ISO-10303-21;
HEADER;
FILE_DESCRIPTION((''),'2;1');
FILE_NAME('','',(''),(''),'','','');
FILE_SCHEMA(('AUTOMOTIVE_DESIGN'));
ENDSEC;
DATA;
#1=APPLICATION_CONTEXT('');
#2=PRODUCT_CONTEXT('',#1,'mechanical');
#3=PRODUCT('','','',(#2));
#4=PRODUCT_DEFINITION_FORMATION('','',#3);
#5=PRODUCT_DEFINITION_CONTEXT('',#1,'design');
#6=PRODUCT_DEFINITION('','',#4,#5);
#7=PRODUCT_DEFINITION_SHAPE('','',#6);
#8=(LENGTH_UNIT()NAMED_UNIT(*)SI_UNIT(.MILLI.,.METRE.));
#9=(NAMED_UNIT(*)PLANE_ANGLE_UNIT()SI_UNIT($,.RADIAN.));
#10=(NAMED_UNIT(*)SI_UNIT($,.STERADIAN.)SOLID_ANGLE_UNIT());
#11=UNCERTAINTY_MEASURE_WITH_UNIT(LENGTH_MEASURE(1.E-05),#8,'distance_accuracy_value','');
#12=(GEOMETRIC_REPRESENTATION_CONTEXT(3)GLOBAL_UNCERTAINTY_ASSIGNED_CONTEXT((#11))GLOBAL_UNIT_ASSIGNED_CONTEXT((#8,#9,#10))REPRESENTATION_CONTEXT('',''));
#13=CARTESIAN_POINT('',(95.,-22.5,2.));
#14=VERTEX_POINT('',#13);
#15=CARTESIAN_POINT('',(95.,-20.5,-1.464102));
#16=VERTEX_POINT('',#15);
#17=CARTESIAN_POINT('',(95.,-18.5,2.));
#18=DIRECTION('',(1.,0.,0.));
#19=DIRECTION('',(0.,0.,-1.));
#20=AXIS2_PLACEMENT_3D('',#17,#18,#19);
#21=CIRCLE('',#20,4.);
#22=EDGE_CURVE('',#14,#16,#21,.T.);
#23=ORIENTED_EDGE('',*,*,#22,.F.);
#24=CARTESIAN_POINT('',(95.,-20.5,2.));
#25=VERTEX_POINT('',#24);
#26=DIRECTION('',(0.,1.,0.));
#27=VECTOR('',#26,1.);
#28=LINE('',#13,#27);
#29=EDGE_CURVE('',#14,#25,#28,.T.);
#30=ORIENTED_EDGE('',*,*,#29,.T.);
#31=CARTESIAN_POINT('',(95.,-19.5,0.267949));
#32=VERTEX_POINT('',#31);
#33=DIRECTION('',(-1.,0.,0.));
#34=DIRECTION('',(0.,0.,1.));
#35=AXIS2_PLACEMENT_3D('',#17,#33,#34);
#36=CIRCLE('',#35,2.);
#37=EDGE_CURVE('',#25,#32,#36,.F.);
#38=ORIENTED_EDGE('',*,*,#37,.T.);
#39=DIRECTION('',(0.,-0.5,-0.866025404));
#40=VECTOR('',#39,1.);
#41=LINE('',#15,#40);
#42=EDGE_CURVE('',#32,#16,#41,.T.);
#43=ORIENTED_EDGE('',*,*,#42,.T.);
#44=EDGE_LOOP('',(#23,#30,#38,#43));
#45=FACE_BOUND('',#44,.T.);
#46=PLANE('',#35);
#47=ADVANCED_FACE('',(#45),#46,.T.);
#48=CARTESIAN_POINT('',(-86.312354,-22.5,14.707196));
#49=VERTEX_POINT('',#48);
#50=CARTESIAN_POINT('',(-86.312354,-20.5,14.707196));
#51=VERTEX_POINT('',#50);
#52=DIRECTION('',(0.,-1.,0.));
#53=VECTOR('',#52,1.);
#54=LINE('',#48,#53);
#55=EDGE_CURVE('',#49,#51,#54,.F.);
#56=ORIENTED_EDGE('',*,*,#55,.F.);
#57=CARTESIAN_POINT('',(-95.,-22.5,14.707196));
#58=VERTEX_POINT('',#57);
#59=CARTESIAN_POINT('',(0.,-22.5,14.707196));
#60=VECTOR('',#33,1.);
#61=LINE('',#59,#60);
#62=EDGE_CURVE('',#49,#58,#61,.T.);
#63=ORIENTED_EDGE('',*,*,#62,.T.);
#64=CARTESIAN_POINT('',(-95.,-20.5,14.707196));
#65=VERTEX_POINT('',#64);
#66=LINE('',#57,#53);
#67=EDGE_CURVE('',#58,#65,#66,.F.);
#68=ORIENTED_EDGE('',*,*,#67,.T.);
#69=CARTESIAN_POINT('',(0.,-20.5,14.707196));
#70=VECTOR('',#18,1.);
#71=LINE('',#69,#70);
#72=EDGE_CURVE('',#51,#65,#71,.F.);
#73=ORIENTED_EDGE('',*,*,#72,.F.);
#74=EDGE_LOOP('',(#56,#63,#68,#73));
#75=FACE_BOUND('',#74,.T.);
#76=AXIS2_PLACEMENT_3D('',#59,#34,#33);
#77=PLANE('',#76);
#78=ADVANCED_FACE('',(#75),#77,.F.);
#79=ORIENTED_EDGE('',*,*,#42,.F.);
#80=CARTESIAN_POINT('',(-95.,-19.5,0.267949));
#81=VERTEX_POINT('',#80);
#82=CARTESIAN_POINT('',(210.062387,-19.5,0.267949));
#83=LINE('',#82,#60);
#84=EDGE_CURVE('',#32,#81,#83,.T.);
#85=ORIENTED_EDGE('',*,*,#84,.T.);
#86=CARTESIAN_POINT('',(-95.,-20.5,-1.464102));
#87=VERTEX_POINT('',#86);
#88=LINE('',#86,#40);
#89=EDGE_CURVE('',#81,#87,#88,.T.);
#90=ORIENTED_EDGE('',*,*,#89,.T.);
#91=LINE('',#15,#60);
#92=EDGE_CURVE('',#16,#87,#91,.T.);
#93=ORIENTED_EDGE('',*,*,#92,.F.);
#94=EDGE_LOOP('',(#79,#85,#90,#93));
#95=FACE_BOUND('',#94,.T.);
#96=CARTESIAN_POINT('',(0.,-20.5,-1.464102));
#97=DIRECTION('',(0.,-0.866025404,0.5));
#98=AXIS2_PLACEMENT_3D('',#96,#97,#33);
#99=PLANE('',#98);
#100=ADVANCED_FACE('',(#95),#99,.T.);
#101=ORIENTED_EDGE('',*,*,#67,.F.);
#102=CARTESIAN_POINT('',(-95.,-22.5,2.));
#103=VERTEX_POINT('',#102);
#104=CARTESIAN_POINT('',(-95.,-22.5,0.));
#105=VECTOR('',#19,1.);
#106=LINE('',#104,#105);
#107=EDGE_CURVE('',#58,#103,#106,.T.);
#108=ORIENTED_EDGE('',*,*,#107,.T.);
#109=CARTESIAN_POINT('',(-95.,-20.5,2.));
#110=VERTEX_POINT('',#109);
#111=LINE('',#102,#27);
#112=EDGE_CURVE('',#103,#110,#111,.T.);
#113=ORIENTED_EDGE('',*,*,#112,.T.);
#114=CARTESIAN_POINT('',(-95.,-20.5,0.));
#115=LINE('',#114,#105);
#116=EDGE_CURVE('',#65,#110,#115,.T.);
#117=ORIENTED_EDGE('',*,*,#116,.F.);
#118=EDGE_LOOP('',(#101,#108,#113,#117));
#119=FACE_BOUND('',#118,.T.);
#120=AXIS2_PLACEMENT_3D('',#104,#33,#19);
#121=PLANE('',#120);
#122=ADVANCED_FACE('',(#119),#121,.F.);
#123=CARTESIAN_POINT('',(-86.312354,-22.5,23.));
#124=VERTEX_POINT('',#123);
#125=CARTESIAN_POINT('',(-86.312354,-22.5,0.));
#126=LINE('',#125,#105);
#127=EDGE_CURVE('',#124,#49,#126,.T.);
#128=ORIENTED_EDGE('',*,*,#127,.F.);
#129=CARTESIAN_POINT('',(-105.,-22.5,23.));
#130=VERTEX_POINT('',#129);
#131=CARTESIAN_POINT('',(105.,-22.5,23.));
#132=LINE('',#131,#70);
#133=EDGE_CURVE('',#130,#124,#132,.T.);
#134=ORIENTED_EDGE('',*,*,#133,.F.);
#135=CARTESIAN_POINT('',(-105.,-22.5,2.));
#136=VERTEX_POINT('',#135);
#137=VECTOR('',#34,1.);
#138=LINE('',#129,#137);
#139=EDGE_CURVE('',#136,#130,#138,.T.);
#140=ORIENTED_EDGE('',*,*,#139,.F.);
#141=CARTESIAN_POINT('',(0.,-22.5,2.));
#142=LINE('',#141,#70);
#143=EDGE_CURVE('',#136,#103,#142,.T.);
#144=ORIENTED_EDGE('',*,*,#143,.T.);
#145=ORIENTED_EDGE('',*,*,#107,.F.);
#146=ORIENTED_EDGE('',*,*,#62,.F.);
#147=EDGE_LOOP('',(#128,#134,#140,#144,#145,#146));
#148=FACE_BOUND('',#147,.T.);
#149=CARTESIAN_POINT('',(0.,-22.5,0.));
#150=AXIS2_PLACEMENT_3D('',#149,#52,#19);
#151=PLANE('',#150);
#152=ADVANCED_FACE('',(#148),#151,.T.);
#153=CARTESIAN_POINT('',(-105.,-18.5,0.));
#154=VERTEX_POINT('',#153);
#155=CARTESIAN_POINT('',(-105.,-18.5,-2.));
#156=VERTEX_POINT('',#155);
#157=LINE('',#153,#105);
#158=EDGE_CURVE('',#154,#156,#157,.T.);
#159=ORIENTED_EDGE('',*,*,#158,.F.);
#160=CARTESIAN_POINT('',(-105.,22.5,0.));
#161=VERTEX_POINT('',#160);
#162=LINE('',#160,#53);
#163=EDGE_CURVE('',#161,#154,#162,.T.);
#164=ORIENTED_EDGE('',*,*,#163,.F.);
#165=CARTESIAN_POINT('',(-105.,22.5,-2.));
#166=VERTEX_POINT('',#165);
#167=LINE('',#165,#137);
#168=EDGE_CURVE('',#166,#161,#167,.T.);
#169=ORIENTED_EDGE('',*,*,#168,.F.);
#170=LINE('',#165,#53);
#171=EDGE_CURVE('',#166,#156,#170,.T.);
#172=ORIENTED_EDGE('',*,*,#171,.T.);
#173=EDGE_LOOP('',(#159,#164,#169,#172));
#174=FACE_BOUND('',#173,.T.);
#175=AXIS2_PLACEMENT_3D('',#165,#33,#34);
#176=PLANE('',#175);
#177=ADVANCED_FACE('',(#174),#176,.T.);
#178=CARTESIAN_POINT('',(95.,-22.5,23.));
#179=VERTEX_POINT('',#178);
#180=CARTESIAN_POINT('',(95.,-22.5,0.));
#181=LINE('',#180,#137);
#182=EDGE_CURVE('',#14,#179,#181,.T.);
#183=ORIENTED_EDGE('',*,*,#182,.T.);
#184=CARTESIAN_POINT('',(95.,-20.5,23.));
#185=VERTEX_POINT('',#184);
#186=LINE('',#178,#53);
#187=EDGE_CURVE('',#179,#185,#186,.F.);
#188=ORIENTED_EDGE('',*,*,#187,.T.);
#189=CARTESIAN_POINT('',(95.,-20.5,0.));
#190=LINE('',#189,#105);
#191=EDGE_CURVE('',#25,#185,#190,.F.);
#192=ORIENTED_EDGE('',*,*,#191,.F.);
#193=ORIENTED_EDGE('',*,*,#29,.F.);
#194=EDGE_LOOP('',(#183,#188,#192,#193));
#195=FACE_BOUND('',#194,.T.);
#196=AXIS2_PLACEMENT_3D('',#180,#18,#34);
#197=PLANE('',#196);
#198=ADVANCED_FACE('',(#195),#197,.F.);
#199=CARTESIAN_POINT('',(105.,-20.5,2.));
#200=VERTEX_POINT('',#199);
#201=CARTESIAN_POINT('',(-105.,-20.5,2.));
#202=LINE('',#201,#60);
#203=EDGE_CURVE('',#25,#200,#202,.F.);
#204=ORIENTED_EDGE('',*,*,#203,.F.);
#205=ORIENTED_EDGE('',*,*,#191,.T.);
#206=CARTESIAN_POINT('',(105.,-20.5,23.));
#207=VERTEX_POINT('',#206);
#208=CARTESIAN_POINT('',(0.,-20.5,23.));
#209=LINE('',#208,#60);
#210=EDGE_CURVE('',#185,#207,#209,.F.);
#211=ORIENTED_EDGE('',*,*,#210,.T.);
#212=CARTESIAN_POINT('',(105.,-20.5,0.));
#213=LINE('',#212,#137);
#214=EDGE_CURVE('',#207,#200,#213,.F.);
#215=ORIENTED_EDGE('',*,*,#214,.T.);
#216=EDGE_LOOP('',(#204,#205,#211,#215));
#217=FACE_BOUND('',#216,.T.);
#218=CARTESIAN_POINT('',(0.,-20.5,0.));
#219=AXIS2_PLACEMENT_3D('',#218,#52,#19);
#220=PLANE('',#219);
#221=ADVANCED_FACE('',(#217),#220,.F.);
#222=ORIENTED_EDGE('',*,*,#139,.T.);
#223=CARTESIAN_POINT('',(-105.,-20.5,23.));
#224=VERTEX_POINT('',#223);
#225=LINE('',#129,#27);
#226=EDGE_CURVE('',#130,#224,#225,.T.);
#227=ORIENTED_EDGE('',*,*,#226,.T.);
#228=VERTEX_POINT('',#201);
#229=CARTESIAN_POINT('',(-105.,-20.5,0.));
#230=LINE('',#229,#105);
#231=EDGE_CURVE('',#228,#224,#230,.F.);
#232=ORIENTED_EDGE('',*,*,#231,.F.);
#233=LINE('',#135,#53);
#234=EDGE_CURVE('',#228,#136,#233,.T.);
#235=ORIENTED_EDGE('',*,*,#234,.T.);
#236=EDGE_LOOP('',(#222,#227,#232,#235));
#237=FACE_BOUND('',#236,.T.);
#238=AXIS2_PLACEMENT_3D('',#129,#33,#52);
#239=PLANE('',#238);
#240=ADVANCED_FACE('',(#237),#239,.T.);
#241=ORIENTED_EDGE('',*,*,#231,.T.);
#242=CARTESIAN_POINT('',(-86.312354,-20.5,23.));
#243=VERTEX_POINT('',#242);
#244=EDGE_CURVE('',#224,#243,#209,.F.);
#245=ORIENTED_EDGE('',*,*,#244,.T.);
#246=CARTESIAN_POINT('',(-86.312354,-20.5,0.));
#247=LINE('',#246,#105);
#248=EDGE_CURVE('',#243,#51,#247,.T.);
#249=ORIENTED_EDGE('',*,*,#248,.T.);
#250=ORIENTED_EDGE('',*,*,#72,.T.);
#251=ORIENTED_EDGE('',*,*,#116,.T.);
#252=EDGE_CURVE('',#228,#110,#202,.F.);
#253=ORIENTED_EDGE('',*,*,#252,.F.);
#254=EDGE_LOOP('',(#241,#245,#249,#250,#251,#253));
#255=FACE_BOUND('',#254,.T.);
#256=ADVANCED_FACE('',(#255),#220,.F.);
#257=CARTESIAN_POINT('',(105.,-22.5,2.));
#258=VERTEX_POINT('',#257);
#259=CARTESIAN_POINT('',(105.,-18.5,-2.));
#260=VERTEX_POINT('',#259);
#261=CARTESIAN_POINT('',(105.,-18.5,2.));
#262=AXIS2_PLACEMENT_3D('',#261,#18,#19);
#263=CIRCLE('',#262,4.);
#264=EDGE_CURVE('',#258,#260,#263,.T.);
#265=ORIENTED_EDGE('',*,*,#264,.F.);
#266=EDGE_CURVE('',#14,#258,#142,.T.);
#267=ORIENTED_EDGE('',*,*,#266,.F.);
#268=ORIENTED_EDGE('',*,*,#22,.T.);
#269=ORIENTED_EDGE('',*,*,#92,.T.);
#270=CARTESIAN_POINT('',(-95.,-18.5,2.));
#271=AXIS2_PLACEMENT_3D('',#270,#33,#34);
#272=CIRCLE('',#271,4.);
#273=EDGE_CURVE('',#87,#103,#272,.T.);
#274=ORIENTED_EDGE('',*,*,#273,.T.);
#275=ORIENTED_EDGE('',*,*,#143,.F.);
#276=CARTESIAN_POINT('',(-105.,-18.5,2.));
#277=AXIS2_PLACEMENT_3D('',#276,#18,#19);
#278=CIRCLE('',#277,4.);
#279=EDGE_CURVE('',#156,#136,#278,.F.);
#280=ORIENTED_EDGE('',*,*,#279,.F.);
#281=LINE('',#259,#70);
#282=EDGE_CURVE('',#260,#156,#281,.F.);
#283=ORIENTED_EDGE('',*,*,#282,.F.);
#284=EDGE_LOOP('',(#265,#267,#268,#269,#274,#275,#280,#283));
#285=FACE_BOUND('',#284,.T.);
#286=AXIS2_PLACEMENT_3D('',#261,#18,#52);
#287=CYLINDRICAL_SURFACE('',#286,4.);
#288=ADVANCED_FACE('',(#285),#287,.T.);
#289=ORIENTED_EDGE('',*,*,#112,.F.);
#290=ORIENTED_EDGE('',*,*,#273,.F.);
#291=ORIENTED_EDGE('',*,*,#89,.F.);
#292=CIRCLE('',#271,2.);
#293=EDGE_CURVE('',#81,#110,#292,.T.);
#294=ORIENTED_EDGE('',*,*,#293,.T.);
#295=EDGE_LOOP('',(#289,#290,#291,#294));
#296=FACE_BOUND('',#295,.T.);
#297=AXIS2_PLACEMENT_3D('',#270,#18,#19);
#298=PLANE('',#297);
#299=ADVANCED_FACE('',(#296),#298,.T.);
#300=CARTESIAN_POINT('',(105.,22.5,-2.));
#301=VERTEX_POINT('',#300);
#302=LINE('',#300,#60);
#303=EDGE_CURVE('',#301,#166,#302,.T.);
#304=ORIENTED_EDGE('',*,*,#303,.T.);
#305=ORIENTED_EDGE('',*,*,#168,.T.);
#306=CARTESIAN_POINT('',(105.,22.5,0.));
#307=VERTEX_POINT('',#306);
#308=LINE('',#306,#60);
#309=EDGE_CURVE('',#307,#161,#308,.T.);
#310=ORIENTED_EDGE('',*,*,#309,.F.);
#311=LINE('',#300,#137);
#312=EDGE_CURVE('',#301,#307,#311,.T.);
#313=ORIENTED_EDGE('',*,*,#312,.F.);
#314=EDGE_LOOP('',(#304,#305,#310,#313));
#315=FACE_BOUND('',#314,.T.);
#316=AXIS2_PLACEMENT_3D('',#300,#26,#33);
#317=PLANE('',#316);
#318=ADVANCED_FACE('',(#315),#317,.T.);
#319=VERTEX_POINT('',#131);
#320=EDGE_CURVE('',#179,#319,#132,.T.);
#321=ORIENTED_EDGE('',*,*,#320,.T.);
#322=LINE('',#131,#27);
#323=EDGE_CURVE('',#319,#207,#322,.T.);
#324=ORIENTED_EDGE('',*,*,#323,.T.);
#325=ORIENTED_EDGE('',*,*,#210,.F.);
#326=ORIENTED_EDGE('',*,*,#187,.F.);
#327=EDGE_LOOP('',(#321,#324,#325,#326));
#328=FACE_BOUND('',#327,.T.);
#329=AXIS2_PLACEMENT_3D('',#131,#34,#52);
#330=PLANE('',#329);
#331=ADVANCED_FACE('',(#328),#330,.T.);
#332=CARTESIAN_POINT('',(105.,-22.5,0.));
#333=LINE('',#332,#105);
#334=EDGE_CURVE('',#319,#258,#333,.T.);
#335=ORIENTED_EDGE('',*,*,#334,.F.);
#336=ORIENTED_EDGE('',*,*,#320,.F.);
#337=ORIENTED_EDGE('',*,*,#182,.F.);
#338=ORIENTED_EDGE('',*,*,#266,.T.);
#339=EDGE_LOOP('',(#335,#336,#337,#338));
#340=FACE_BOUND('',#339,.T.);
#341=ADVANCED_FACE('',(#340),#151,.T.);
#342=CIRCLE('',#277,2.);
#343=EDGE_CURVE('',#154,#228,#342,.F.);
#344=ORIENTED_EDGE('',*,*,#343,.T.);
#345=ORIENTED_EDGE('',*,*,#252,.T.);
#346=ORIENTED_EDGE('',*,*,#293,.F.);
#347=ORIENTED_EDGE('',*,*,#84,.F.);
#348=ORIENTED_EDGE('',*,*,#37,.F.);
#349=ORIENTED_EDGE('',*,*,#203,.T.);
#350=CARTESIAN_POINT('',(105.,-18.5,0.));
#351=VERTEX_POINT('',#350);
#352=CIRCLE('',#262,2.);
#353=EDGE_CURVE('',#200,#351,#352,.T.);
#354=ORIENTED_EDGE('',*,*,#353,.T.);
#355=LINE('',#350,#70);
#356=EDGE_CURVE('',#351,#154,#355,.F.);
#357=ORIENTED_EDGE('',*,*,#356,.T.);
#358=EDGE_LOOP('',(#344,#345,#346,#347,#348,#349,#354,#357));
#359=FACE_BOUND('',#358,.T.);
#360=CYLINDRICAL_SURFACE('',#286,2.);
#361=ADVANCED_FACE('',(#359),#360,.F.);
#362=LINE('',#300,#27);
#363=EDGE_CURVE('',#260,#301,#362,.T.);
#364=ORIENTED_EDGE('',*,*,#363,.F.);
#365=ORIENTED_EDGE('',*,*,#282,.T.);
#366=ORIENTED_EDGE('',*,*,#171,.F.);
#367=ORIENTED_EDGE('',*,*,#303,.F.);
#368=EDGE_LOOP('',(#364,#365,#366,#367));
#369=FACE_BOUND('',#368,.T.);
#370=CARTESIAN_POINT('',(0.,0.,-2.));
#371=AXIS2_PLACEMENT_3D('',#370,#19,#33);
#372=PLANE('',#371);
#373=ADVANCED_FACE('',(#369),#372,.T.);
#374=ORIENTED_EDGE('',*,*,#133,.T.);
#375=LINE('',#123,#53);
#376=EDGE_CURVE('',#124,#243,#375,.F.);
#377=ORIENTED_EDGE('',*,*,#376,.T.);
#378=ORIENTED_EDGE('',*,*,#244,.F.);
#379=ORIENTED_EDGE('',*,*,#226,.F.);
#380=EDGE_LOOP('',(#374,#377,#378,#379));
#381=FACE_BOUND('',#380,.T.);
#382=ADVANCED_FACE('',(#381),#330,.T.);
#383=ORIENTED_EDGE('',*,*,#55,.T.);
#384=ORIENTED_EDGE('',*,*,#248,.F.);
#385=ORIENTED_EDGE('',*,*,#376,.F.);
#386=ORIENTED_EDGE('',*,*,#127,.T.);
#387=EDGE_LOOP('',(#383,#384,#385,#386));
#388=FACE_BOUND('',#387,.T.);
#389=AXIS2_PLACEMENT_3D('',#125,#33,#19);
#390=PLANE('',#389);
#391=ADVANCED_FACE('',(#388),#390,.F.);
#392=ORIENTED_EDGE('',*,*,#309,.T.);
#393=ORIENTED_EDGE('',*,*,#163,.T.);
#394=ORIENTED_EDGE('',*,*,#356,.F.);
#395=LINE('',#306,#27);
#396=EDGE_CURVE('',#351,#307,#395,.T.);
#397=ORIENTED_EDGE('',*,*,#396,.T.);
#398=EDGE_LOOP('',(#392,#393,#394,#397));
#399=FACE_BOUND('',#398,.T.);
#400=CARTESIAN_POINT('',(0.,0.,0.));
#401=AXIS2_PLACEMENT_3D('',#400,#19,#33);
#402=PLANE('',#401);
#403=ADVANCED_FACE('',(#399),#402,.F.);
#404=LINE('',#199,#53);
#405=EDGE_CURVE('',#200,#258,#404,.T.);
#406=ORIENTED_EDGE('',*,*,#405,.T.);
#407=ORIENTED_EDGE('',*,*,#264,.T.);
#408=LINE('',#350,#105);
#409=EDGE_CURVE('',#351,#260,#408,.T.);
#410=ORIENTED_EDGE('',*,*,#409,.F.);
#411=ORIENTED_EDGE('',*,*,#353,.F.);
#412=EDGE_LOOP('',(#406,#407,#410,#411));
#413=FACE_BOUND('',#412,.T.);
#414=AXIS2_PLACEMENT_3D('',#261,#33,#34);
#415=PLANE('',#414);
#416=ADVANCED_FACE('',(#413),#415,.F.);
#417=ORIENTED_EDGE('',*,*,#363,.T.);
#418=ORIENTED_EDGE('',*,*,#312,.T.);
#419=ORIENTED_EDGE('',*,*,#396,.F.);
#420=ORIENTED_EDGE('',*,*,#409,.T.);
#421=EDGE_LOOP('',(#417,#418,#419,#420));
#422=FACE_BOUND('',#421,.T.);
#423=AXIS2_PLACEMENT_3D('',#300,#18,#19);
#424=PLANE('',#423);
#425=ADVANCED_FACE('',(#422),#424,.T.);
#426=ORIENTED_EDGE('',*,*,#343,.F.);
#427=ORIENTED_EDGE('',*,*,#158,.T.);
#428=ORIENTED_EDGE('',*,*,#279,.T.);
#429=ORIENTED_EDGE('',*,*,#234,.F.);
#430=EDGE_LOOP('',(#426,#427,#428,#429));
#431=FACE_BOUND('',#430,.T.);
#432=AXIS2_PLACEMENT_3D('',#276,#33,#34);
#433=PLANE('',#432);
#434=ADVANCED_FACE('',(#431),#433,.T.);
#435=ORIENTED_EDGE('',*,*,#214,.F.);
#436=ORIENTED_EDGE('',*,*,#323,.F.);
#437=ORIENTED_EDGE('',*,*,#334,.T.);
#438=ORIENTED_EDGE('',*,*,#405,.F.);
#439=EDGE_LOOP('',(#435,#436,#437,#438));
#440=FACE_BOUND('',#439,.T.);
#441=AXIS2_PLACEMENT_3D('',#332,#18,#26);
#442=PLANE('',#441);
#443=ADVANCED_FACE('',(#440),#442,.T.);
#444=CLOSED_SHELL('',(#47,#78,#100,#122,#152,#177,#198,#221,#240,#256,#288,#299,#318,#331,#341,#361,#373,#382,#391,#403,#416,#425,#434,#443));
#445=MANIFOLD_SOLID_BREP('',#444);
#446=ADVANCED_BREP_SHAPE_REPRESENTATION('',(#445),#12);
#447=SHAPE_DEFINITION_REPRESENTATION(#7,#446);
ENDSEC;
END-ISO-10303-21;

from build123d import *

# Parameters (mm, degrees)
SKETCH1_W                        = 210
SKETCH1_H                        = 45
BASE_FLANGE1_DEPTH               = 2
SM_EDGE_FLANGE_1_STRIP_W         = 12
SM_EDGE_FLANGE_1_STRIP_H         = 2
SM_EDGE_FLANGE_1_STRIP_CUT_DEPTH = 210
SM_EDGE_FLANGE_1_DEPTH           = 210
CUT_EXTRUDE1_START               = -86.312353883
CUT_EXTRUDE1_DEPTH               = 181.312353883
CUT_EXTRUDE1_START_2             = -95
CUT_EXTRUDE1_2_DEPTH             = 8.687646117


# Read off the part's stored shape, not the designer's step: Cut-Extrude1
# Sheet-metal steps are written as plain solids
with BuildPart() as part:
    # Sketch1 → Base-Flange1 (new body)
    with BuildSketch(Plane.XY):
        Rectangle(SKETCH1_W, SKETCH1_H)
    extrude(amount=-BASE_FLANGE1_DEPTH)

    # Ребро-кромка1 strip (across the edge) → Ребро-кромка1 strip cut (cut)
    with BuildSketch(Plane(origin=(-105, -22.5, 0), x_dir=(0, 1, 0), z_dir=(1, 0, 0))):
        with Locations((-2, -1)):
            Rectangle(SM_EDGE_FLANGE_1_STRIP_W, SM_EDGE_FLANGE_1_STRIP_H)
    extrude(amount=SM_EDGE_FLANGE_1_STRIP_CUT_DEPTH, mode=Mode.SUBTRACT)

    # Ребро-кромка1 section (across the edge) → Ребро-кромка1 (add)
    with BuildSketch(Plane(origin=(-105, -22.5, 0), x_dir=(0, 1, 0), z_dir=(1, 0, 0))):
        with BuildLine():
            Line((0, 2), (0, 23))
            Line((0, 23), (2, 23))
            Line((2, 23), (2, 2))
            ThreePointArc((2, 2), (2.585786438, 0.585786438), (4, 0))
            Line((4, 0), (4, -2))
            ThreePointArc((4, -2), (1.171572875, -0.828427125), (0, 2))
        make_face()
    extrude(amount=SM_EDGE_FLANGE_1_DEPTH)

    # Cut-Extrude1 outline → Cut-Extrude1 (cut)
    with BuildSketch(Plane.YZ.offset(CUT_EXTRUDE1_START)):
        with BuildLine():
            Line((-20.5, 2), (-20.5, 23))
            Line((-20.5, 23), (-22.5, 23))
            Line((-22.5, 23), (-22.5, 2))
            ThreePointArc((-22.5, 2), (-21.964101615, 0), (-20.5, -1.464101615))
            Line((-20.5, -1.464101615), (-19.5, 0.267949193))
            ThreePointArc((-19.5, 0.267949193), (-20.232050807, 1), (-20.5, 2))
        make_face()
    extrude(amount=CUT_EXTRUDE1_DEPTH, mode=Mode.SUBTRACT)

    # Cut-Extrude1 2 outline → Cut-Extrude1 2 (cut)
    with BuildSketch(Plane.YZ.offset(CUT_EXTRUDE1_START_2)):
        with BuildLine():
            Line((-20.5, 2), (-20.5, 14.70719641))
            Line((-20.5, 14.70719641), (-22.5, 14.70719641))
            Line((-22.5, 14.70719641), (-22.5, 2))
            ThreePointArc((-22.5, 2), (-21.964101615, 0), (-20.5, -1.464101615))
            Line((-20.5, -1.464101615), (-19.5, 0.267949193))
            ThreePointArc((-19.5, 0.267949193), (-20.232050807, 1), (-20.5, 2))
        make_face()
    extrude(amount=CUT_EXTRUDE1_2_DEPTH, mode=Mode.SUBTRACT)


solid = part.part
